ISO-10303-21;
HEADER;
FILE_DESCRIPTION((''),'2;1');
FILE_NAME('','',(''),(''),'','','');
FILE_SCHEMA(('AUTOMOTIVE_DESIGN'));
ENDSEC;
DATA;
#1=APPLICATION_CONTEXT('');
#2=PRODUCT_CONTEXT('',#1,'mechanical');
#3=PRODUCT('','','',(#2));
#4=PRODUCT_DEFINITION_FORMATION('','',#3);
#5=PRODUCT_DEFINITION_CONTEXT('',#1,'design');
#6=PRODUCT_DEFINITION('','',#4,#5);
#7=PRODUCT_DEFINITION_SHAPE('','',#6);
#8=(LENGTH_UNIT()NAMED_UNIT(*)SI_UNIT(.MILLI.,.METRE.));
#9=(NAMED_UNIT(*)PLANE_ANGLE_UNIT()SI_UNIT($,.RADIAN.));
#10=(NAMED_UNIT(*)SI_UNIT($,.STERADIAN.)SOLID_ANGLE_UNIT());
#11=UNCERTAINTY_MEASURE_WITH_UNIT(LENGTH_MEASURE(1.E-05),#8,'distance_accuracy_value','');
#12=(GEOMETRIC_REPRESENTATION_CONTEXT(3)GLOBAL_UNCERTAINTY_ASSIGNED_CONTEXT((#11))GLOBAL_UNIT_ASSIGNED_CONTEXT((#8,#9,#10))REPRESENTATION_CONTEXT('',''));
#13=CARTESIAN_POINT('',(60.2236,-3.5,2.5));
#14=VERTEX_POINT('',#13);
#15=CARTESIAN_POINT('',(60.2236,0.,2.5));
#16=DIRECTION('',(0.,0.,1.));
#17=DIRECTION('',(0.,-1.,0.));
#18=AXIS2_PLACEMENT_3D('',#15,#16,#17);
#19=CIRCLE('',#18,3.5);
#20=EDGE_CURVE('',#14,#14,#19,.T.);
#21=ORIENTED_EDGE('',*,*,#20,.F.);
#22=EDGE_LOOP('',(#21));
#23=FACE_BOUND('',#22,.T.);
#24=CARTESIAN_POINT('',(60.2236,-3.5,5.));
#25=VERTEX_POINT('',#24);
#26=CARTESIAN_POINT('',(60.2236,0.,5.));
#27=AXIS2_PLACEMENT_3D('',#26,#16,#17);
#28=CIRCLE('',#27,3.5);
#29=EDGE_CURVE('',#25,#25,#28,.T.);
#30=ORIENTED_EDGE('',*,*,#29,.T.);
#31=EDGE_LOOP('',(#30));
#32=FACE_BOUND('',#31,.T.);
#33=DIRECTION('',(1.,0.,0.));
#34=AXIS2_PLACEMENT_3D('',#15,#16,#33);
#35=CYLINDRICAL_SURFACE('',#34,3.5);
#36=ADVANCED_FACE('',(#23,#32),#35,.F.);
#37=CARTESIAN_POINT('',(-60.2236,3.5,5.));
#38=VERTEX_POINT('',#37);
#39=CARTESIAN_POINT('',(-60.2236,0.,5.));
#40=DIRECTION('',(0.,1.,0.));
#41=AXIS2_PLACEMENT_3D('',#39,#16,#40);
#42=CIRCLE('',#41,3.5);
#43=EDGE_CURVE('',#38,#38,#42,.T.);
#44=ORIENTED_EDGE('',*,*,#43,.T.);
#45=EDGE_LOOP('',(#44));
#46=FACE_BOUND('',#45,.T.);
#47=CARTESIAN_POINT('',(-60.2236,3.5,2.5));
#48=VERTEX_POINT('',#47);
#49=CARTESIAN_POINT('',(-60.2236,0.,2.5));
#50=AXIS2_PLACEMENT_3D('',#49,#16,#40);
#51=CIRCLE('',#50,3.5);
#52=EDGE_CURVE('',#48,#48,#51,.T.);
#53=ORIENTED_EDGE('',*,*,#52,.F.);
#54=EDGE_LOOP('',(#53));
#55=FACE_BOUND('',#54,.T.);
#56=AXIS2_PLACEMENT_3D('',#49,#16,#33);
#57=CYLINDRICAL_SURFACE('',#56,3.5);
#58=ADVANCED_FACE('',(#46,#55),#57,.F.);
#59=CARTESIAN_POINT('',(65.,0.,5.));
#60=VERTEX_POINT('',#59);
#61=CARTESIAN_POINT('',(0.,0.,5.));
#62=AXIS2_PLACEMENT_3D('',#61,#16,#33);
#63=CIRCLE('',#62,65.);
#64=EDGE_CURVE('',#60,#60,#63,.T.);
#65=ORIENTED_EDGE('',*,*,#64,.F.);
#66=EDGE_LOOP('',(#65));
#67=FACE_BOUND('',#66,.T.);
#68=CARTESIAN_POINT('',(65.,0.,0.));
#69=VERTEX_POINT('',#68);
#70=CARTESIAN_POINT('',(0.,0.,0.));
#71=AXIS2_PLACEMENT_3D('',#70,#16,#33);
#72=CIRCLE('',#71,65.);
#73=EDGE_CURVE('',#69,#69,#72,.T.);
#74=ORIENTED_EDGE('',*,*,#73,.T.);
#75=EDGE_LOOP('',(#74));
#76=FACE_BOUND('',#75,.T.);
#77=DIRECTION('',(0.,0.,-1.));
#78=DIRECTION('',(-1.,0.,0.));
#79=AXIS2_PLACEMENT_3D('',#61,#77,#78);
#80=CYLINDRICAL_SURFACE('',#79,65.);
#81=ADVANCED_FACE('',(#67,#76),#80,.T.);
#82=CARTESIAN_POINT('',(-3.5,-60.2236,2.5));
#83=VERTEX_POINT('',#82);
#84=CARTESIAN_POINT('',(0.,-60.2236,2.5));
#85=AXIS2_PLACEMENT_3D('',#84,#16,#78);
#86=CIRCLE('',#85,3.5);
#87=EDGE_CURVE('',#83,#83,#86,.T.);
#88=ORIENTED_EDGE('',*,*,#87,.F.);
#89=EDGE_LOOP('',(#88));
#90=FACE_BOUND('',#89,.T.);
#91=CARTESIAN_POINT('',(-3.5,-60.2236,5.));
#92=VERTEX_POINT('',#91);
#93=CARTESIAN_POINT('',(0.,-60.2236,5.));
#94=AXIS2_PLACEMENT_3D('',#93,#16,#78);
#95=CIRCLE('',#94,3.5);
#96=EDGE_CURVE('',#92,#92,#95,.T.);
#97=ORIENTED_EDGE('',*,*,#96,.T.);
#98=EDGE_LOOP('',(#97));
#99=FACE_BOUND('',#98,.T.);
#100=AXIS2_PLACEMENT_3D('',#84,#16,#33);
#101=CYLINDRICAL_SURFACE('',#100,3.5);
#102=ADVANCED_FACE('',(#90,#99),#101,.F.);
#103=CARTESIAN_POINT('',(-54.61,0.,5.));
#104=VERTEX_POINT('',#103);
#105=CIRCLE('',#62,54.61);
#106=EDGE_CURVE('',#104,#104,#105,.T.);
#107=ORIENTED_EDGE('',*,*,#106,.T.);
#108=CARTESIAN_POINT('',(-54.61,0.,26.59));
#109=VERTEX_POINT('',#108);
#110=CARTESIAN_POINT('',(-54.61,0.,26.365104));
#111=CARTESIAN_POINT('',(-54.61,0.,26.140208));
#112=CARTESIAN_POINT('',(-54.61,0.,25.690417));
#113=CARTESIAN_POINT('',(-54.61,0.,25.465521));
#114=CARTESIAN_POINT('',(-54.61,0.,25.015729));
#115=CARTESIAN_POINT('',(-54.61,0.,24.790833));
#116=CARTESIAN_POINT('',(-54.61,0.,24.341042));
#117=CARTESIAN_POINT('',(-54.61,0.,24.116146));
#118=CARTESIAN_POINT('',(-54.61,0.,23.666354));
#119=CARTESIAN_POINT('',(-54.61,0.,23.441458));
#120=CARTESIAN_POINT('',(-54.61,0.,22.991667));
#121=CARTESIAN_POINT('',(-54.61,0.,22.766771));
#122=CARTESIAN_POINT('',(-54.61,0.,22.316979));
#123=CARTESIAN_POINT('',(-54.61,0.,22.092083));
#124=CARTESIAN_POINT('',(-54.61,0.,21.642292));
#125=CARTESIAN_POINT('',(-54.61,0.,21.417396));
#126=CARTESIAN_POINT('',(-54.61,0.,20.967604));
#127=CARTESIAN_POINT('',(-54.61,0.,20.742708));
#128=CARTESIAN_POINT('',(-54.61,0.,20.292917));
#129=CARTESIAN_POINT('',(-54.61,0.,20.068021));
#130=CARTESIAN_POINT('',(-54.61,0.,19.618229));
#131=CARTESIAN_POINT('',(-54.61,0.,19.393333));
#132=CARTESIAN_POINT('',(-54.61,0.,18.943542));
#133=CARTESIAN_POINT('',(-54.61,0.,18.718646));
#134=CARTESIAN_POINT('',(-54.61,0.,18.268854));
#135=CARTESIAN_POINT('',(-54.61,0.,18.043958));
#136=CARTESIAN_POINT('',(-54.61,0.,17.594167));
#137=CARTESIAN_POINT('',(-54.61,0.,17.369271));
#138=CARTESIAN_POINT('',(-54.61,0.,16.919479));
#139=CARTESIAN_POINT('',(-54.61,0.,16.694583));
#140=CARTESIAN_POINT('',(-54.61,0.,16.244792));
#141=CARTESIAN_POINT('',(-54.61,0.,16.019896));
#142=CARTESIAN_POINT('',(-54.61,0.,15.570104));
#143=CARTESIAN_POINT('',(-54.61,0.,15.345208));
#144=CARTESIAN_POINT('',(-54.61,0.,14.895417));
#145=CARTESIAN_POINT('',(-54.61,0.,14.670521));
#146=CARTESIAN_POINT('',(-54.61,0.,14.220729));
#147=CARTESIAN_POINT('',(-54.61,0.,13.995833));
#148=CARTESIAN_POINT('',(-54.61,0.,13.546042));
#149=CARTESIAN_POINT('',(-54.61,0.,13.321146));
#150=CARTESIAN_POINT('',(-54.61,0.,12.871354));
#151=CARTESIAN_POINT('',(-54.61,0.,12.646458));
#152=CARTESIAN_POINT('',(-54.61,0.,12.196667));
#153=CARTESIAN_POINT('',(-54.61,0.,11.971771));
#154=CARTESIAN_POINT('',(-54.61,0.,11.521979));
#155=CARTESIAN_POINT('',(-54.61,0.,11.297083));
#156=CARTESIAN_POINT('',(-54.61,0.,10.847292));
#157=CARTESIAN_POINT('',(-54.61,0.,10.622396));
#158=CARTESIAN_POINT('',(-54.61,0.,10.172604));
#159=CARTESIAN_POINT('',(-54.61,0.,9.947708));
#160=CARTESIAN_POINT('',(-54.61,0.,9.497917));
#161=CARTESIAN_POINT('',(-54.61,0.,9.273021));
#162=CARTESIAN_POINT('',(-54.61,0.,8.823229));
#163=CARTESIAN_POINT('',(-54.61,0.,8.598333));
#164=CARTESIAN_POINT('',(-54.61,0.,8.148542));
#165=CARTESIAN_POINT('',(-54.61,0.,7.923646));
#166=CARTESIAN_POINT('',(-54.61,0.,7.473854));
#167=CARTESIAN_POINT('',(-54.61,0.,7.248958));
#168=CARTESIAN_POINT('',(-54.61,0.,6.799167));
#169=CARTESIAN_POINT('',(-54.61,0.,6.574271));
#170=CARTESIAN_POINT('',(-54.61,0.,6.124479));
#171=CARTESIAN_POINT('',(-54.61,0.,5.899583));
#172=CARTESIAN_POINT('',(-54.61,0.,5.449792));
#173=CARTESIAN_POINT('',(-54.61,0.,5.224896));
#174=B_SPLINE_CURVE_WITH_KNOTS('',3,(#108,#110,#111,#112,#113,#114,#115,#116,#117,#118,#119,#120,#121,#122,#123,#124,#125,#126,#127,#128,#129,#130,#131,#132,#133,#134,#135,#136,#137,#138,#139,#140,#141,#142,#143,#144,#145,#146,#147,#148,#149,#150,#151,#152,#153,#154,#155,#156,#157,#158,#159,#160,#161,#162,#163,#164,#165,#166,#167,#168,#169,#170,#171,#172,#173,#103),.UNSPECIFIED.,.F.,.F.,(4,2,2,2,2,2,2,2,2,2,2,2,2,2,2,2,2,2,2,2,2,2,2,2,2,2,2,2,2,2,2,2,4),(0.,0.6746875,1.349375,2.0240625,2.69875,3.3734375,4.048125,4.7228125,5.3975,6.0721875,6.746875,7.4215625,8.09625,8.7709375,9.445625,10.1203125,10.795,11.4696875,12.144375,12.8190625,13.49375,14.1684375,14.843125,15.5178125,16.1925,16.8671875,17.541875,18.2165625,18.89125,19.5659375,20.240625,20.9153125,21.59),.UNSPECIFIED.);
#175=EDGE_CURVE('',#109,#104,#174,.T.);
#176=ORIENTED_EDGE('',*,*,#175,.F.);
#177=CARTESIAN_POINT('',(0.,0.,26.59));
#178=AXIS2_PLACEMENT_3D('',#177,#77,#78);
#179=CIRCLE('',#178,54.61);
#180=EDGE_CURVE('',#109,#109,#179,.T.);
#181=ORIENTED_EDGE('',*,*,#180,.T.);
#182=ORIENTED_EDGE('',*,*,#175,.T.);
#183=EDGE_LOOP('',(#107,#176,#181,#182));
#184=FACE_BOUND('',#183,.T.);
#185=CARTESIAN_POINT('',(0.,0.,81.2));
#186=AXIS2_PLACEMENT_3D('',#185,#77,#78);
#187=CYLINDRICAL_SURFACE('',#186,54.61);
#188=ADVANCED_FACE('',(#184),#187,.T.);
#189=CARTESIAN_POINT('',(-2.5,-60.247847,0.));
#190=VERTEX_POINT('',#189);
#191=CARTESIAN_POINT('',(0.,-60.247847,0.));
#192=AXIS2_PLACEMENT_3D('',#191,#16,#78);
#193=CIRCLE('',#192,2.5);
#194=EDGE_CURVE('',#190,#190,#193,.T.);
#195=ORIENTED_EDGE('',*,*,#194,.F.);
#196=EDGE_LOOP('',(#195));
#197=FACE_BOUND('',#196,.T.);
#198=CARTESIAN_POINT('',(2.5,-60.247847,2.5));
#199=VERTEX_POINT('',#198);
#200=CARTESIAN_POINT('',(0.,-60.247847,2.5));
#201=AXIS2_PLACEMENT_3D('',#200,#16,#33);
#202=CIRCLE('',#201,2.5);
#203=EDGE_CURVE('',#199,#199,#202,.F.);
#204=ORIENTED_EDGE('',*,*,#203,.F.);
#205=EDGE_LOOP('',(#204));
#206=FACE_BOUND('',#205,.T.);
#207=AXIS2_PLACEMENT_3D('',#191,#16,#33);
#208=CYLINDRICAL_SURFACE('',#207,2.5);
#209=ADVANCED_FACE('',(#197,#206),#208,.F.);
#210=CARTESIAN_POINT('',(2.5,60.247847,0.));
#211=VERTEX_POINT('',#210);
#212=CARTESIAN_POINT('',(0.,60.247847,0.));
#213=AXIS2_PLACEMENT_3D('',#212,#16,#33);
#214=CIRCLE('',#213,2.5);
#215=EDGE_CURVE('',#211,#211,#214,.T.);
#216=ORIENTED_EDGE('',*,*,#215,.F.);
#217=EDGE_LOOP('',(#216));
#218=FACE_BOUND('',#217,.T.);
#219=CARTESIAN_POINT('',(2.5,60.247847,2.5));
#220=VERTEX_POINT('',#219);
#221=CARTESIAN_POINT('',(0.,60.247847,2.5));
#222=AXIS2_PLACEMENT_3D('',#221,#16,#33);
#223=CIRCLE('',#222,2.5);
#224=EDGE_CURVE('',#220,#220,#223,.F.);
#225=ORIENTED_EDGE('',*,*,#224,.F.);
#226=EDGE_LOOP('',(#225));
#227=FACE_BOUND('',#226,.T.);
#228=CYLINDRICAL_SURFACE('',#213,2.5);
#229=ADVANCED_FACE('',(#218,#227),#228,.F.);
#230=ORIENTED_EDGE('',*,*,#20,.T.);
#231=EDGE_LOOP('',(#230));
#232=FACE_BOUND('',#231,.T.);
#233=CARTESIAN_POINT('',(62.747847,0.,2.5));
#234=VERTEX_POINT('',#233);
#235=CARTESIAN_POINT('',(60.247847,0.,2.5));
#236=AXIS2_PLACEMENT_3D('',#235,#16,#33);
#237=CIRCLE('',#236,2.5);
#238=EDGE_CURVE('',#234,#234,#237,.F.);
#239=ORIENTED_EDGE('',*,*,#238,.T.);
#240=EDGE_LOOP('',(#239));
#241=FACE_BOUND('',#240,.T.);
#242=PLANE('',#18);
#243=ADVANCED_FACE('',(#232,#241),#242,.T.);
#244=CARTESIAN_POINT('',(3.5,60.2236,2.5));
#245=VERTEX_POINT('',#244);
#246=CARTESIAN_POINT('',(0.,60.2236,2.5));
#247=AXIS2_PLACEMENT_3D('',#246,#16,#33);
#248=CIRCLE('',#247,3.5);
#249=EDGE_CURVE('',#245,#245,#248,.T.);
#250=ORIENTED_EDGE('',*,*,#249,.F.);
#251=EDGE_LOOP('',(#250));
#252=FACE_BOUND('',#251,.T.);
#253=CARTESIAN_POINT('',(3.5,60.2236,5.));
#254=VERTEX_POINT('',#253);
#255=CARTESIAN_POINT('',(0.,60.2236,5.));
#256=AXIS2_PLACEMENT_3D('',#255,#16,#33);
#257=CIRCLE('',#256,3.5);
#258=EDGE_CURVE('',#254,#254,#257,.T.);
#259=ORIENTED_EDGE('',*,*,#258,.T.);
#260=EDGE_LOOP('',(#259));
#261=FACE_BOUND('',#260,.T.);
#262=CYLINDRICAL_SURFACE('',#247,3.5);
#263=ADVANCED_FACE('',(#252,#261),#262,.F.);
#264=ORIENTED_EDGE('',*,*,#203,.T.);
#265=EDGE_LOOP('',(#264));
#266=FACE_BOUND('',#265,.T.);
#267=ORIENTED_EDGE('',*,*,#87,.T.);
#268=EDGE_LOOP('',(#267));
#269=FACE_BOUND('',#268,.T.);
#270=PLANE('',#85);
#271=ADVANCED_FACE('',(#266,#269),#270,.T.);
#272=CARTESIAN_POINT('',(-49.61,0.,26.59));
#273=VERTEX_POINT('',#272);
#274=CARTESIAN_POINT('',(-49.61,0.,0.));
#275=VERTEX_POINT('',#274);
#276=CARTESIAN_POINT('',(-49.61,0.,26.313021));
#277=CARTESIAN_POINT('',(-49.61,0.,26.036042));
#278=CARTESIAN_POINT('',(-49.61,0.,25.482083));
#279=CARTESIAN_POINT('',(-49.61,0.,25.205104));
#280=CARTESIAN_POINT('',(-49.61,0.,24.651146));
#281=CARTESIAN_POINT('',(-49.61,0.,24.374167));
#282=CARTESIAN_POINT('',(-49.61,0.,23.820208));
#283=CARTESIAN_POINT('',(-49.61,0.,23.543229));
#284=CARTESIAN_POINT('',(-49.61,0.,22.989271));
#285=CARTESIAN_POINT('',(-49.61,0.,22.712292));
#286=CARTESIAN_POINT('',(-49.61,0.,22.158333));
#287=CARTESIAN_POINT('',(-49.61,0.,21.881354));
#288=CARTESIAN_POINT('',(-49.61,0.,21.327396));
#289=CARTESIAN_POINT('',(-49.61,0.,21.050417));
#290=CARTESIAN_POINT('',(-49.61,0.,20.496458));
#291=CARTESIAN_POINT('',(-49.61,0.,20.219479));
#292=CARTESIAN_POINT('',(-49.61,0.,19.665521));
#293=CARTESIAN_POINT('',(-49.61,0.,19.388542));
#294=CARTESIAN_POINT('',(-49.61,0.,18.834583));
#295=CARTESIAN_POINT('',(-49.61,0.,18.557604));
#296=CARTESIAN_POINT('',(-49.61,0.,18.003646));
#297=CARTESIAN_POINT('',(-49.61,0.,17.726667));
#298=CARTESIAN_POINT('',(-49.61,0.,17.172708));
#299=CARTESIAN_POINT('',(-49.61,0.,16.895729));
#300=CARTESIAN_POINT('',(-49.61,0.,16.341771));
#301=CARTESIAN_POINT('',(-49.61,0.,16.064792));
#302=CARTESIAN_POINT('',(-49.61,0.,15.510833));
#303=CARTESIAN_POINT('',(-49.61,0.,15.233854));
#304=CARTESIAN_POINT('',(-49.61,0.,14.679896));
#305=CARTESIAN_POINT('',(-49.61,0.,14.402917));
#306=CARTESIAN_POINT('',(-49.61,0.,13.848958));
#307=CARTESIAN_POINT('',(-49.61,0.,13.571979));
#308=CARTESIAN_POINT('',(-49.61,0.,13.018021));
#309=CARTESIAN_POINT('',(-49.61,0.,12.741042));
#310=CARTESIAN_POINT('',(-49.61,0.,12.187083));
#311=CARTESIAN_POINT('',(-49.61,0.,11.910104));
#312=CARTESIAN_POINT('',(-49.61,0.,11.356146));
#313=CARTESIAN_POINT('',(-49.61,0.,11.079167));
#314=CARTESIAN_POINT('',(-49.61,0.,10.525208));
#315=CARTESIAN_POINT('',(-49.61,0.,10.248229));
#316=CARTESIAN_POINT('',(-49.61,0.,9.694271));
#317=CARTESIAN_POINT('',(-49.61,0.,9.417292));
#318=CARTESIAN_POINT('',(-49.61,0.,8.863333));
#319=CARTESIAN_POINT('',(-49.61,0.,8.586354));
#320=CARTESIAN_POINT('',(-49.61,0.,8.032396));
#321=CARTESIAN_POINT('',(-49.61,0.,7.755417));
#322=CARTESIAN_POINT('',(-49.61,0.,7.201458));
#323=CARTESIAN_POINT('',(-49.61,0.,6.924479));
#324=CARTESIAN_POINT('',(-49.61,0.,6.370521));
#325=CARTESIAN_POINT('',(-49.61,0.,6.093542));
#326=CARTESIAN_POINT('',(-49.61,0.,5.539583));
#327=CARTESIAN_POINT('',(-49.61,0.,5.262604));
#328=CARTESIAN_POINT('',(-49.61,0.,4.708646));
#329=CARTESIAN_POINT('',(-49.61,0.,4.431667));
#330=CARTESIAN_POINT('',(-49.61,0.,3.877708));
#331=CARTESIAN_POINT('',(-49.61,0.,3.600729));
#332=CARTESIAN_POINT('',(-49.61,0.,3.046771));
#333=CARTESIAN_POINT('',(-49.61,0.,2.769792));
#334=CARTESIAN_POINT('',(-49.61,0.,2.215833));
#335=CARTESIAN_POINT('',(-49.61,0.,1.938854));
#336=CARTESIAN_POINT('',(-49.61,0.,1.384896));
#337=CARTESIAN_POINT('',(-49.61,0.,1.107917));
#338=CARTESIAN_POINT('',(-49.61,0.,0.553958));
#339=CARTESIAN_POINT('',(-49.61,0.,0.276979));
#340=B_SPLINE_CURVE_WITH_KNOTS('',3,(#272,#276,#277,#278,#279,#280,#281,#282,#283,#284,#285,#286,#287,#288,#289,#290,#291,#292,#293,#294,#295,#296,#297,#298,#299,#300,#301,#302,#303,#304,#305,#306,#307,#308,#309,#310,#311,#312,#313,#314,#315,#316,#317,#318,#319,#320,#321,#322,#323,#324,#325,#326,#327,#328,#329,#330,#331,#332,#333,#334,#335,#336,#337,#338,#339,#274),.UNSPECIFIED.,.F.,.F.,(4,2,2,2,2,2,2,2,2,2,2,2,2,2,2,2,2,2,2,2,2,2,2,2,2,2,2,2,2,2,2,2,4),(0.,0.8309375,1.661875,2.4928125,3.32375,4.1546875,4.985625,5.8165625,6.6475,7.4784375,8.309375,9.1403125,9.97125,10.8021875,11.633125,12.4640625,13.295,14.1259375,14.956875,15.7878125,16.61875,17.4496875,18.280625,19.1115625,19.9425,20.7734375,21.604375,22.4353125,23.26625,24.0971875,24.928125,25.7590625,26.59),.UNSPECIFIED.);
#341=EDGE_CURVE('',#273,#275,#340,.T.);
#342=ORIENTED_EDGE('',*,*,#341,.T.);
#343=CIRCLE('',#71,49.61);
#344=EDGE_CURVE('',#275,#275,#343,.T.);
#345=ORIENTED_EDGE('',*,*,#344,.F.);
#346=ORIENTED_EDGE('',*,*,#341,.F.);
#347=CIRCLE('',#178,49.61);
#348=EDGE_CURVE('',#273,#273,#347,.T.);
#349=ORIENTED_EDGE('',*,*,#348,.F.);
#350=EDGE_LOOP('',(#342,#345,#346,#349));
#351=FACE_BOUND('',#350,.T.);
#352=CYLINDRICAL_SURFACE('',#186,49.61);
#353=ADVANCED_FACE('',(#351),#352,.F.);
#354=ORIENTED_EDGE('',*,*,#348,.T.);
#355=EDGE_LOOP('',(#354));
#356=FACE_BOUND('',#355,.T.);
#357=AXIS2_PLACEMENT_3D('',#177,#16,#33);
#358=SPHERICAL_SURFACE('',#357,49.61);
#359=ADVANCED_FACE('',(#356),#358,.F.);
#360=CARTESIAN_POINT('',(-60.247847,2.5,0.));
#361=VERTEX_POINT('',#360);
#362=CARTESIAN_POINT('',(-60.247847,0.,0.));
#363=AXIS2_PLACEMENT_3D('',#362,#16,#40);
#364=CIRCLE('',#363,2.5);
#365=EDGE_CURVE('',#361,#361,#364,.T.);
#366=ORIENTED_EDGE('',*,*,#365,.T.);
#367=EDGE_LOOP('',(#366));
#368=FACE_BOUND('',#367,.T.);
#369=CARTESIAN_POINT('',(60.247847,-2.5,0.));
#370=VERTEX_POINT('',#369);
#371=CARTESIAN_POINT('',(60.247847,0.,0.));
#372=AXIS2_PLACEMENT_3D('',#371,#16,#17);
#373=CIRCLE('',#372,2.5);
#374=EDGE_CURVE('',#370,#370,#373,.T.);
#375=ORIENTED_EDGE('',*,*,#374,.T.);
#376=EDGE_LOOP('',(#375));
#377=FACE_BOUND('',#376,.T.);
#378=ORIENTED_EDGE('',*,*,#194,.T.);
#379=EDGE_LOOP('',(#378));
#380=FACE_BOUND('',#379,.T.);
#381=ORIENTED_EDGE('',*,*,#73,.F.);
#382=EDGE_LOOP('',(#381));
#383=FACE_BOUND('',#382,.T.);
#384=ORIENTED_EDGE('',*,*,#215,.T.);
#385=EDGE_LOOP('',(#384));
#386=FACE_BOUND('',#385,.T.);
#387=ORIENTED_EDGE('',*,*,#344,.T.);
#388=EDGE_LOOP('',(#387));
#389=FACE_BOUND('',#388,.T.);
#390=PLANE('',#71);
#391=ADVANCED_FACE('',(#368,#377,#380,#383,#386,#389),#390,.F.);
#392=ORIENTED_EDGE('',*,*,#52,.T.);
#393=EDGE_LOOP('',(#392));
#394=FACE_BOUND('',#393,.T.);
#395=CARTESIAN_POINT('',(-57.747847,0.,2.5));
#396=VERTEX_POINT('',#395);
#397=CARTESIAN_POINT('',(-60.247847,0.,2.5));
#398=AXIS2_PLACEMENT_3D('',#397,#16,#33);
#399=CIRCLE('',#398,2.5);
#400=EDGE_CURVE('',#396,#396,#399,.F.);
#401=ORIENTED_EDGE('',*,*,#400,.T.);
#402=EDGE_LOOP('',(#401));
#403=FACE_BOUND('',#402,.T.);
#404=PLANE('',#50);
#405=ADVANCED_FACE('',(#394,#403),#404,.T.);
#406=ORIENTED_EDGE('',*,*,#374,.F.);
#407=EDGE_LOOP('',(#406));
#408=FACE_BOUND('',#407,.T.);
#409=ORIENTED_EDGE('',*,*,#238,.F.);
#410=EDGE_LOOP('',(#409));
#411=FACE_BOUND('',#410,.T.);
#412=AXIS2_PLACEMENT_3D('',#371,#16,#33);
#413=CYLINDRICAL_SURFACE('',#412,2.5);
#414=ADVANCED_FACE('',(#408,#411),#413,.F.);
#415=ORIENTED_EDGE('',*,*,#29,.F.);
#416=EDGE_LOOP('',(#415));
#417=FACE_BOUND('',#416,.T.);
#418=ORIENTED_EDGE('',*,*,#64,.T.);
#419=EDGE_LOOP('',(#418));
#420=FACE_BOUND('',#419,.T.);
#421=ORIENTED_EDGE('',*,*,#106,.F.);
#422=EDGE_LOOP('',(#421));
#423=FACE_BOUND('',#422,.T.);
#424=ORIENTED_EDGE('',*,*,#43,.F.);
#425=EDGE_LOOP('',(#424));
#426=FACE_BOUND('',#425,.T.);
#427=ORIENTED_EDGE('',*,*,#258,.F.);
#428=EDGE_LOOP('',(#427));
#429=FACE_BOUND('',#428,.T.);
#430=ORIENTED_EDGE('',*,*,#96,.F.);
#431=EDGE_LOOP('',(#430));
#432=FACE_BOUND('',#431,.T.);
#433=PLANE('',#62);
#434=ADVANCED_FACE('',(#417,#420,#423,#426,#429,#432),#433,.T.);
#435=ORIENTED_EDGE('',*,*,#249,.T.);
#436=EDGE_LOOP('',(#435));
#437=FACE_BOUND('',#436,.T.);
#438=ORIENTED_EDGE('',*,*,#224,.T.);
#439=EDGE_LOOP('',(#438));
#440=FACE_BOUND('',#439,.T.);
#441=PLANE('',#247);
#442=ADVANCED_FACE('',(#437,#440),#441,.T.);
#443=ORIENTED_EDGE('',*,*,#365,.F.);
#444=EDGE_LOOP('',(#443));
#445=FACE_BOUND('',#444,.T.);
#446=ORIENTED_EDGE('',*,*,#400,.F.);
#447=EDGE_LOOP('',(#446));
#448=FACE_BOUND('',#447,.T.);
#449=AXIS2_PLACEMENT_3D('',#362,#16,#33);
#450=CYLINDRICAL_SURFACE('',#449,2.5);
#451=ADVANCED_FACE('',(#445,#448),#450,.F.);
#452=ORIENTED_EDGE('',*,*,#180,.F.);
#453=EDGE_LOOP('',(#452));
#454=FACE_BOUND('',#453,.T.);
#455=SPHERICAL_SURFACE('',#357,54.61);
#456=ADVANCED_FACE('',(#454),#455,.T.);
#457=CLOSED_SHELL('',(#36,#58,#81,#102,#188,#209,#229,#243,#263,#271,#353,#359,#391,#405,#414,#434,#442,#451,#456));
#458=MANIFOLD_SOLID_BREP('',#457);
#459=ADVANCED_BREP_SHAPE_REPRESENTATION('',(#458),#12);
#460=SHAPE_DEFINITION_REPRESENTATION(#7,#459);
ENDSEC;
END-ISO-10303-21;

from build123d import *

# Parameters (mm, degrees)
SKETCH2_R           = 65
BOSS_EXTRUDE1_DEPTH = 5
SKETCH3_R           = 54.61
BOSS_EXTRUDE2_DEPTH = 76.2
FILLET8_R           = 54.61
SKETCH7_R           = 2.5
CUT_EXTRUDE2_DEPTH  = 5
SKETCH8_R           = 3.5
CUT_EXTRUDE3_DEPTH  = 2.5
CIRPATTERN1_COUNT   = 4


# Read off the part's stored shape, not the designer's step: Shell1
with BuildPart() as part:
    # Sketch2 → Boss-Extrude1 (new body)
    with BuildSketch(Plane(origin=(0, 0, 0), x_dir=(0, 1, 0), z_dir=(0, 0, 1))):
        with Locations(Location((0, 0, 0), (0, 0, 270))):
            Circle(SKETCH2_R)
    extrude(amount=BOSS_EXTRUDE1_DEPTH)

    # Sketch3 → Boss-Extrude2 (add)
    with BuildSketch(Plane.XY.offset(5)):
        with Locations(Location((0, 0, 0), (0, 0, 180))):
            Circle(SKETCH3_R)
    extrude(amount=BOSS_EXTRUDE2_DEPTH)

    # Fillet8
    fillet8_edges = [part.edges().sort_by_distance(p)[0] for p in [
        (54.61, 0, 81.2),
    ]]
    fillet(fillet8_edges, radius=FILLET8_R)

    # Shell1 outline → Shell1 (revolve, cut)
    with BuildSketch(Plane.XZ):
        with BuildLine():
            Line((49.61, 0), (49.61, 26.58999995))
            ThreePointArc((49.61, 26.58999995), (35.079567432, 61.669567397), (0, 76.2))
            Line((0, 76.2), (0, 0))
            Line((0, 0), (49.61, 0))
        make_face()
    revolve(axis=Axis((0, 0, 0), (0, 0, 1)), mode=Mode.SUBTRACT)

    # Sketch7 → Cut-Extrude2 (cut)
    with BuildSketch(Plane.XY.offset(5)):
        with Locations((0, 60.247846794)):
            Circle(SKETCH7_R)
    cut_extrude2 = extrude(amount=-CUT_EXTRUDE2_DEPTH, mode=Mode.SUBTRACT)

    # Sketch8 → Cut-Extrude3 (cut)
    with BuildSketch(Plane.XY.offset(5)):
        with Locations((0, 60.223600104)):
            Circle(SKETCH8_R)
    cut_extrude3 = extrude(amount=-CUT_EXTRUDE3_DEPTH, mode=Mode.SUBTRACT)

    # CirPattern1: Cut-Extrude2, Cut-Extrude3 ×4 about axis
    cirpattern1_axis = Axis((0, 0, 0), (0, 0, 1))
    add([cut_extrude2.rotate(cirpattern1_axis, i * 360 / CIRPATTERN1_COUNT) for i in range(1, CIRPATTERN1_COUNT)], mode=Mode.SUBTRACT)
    add([cut_extrude3.rotate(cirpattern1_axis, i * 360 / CIRPATTERN1_COUNT) for i in range(1, CIRPATTERN1_COUNT)], mode=Mode.SUBTRACT)


solid = part.part
